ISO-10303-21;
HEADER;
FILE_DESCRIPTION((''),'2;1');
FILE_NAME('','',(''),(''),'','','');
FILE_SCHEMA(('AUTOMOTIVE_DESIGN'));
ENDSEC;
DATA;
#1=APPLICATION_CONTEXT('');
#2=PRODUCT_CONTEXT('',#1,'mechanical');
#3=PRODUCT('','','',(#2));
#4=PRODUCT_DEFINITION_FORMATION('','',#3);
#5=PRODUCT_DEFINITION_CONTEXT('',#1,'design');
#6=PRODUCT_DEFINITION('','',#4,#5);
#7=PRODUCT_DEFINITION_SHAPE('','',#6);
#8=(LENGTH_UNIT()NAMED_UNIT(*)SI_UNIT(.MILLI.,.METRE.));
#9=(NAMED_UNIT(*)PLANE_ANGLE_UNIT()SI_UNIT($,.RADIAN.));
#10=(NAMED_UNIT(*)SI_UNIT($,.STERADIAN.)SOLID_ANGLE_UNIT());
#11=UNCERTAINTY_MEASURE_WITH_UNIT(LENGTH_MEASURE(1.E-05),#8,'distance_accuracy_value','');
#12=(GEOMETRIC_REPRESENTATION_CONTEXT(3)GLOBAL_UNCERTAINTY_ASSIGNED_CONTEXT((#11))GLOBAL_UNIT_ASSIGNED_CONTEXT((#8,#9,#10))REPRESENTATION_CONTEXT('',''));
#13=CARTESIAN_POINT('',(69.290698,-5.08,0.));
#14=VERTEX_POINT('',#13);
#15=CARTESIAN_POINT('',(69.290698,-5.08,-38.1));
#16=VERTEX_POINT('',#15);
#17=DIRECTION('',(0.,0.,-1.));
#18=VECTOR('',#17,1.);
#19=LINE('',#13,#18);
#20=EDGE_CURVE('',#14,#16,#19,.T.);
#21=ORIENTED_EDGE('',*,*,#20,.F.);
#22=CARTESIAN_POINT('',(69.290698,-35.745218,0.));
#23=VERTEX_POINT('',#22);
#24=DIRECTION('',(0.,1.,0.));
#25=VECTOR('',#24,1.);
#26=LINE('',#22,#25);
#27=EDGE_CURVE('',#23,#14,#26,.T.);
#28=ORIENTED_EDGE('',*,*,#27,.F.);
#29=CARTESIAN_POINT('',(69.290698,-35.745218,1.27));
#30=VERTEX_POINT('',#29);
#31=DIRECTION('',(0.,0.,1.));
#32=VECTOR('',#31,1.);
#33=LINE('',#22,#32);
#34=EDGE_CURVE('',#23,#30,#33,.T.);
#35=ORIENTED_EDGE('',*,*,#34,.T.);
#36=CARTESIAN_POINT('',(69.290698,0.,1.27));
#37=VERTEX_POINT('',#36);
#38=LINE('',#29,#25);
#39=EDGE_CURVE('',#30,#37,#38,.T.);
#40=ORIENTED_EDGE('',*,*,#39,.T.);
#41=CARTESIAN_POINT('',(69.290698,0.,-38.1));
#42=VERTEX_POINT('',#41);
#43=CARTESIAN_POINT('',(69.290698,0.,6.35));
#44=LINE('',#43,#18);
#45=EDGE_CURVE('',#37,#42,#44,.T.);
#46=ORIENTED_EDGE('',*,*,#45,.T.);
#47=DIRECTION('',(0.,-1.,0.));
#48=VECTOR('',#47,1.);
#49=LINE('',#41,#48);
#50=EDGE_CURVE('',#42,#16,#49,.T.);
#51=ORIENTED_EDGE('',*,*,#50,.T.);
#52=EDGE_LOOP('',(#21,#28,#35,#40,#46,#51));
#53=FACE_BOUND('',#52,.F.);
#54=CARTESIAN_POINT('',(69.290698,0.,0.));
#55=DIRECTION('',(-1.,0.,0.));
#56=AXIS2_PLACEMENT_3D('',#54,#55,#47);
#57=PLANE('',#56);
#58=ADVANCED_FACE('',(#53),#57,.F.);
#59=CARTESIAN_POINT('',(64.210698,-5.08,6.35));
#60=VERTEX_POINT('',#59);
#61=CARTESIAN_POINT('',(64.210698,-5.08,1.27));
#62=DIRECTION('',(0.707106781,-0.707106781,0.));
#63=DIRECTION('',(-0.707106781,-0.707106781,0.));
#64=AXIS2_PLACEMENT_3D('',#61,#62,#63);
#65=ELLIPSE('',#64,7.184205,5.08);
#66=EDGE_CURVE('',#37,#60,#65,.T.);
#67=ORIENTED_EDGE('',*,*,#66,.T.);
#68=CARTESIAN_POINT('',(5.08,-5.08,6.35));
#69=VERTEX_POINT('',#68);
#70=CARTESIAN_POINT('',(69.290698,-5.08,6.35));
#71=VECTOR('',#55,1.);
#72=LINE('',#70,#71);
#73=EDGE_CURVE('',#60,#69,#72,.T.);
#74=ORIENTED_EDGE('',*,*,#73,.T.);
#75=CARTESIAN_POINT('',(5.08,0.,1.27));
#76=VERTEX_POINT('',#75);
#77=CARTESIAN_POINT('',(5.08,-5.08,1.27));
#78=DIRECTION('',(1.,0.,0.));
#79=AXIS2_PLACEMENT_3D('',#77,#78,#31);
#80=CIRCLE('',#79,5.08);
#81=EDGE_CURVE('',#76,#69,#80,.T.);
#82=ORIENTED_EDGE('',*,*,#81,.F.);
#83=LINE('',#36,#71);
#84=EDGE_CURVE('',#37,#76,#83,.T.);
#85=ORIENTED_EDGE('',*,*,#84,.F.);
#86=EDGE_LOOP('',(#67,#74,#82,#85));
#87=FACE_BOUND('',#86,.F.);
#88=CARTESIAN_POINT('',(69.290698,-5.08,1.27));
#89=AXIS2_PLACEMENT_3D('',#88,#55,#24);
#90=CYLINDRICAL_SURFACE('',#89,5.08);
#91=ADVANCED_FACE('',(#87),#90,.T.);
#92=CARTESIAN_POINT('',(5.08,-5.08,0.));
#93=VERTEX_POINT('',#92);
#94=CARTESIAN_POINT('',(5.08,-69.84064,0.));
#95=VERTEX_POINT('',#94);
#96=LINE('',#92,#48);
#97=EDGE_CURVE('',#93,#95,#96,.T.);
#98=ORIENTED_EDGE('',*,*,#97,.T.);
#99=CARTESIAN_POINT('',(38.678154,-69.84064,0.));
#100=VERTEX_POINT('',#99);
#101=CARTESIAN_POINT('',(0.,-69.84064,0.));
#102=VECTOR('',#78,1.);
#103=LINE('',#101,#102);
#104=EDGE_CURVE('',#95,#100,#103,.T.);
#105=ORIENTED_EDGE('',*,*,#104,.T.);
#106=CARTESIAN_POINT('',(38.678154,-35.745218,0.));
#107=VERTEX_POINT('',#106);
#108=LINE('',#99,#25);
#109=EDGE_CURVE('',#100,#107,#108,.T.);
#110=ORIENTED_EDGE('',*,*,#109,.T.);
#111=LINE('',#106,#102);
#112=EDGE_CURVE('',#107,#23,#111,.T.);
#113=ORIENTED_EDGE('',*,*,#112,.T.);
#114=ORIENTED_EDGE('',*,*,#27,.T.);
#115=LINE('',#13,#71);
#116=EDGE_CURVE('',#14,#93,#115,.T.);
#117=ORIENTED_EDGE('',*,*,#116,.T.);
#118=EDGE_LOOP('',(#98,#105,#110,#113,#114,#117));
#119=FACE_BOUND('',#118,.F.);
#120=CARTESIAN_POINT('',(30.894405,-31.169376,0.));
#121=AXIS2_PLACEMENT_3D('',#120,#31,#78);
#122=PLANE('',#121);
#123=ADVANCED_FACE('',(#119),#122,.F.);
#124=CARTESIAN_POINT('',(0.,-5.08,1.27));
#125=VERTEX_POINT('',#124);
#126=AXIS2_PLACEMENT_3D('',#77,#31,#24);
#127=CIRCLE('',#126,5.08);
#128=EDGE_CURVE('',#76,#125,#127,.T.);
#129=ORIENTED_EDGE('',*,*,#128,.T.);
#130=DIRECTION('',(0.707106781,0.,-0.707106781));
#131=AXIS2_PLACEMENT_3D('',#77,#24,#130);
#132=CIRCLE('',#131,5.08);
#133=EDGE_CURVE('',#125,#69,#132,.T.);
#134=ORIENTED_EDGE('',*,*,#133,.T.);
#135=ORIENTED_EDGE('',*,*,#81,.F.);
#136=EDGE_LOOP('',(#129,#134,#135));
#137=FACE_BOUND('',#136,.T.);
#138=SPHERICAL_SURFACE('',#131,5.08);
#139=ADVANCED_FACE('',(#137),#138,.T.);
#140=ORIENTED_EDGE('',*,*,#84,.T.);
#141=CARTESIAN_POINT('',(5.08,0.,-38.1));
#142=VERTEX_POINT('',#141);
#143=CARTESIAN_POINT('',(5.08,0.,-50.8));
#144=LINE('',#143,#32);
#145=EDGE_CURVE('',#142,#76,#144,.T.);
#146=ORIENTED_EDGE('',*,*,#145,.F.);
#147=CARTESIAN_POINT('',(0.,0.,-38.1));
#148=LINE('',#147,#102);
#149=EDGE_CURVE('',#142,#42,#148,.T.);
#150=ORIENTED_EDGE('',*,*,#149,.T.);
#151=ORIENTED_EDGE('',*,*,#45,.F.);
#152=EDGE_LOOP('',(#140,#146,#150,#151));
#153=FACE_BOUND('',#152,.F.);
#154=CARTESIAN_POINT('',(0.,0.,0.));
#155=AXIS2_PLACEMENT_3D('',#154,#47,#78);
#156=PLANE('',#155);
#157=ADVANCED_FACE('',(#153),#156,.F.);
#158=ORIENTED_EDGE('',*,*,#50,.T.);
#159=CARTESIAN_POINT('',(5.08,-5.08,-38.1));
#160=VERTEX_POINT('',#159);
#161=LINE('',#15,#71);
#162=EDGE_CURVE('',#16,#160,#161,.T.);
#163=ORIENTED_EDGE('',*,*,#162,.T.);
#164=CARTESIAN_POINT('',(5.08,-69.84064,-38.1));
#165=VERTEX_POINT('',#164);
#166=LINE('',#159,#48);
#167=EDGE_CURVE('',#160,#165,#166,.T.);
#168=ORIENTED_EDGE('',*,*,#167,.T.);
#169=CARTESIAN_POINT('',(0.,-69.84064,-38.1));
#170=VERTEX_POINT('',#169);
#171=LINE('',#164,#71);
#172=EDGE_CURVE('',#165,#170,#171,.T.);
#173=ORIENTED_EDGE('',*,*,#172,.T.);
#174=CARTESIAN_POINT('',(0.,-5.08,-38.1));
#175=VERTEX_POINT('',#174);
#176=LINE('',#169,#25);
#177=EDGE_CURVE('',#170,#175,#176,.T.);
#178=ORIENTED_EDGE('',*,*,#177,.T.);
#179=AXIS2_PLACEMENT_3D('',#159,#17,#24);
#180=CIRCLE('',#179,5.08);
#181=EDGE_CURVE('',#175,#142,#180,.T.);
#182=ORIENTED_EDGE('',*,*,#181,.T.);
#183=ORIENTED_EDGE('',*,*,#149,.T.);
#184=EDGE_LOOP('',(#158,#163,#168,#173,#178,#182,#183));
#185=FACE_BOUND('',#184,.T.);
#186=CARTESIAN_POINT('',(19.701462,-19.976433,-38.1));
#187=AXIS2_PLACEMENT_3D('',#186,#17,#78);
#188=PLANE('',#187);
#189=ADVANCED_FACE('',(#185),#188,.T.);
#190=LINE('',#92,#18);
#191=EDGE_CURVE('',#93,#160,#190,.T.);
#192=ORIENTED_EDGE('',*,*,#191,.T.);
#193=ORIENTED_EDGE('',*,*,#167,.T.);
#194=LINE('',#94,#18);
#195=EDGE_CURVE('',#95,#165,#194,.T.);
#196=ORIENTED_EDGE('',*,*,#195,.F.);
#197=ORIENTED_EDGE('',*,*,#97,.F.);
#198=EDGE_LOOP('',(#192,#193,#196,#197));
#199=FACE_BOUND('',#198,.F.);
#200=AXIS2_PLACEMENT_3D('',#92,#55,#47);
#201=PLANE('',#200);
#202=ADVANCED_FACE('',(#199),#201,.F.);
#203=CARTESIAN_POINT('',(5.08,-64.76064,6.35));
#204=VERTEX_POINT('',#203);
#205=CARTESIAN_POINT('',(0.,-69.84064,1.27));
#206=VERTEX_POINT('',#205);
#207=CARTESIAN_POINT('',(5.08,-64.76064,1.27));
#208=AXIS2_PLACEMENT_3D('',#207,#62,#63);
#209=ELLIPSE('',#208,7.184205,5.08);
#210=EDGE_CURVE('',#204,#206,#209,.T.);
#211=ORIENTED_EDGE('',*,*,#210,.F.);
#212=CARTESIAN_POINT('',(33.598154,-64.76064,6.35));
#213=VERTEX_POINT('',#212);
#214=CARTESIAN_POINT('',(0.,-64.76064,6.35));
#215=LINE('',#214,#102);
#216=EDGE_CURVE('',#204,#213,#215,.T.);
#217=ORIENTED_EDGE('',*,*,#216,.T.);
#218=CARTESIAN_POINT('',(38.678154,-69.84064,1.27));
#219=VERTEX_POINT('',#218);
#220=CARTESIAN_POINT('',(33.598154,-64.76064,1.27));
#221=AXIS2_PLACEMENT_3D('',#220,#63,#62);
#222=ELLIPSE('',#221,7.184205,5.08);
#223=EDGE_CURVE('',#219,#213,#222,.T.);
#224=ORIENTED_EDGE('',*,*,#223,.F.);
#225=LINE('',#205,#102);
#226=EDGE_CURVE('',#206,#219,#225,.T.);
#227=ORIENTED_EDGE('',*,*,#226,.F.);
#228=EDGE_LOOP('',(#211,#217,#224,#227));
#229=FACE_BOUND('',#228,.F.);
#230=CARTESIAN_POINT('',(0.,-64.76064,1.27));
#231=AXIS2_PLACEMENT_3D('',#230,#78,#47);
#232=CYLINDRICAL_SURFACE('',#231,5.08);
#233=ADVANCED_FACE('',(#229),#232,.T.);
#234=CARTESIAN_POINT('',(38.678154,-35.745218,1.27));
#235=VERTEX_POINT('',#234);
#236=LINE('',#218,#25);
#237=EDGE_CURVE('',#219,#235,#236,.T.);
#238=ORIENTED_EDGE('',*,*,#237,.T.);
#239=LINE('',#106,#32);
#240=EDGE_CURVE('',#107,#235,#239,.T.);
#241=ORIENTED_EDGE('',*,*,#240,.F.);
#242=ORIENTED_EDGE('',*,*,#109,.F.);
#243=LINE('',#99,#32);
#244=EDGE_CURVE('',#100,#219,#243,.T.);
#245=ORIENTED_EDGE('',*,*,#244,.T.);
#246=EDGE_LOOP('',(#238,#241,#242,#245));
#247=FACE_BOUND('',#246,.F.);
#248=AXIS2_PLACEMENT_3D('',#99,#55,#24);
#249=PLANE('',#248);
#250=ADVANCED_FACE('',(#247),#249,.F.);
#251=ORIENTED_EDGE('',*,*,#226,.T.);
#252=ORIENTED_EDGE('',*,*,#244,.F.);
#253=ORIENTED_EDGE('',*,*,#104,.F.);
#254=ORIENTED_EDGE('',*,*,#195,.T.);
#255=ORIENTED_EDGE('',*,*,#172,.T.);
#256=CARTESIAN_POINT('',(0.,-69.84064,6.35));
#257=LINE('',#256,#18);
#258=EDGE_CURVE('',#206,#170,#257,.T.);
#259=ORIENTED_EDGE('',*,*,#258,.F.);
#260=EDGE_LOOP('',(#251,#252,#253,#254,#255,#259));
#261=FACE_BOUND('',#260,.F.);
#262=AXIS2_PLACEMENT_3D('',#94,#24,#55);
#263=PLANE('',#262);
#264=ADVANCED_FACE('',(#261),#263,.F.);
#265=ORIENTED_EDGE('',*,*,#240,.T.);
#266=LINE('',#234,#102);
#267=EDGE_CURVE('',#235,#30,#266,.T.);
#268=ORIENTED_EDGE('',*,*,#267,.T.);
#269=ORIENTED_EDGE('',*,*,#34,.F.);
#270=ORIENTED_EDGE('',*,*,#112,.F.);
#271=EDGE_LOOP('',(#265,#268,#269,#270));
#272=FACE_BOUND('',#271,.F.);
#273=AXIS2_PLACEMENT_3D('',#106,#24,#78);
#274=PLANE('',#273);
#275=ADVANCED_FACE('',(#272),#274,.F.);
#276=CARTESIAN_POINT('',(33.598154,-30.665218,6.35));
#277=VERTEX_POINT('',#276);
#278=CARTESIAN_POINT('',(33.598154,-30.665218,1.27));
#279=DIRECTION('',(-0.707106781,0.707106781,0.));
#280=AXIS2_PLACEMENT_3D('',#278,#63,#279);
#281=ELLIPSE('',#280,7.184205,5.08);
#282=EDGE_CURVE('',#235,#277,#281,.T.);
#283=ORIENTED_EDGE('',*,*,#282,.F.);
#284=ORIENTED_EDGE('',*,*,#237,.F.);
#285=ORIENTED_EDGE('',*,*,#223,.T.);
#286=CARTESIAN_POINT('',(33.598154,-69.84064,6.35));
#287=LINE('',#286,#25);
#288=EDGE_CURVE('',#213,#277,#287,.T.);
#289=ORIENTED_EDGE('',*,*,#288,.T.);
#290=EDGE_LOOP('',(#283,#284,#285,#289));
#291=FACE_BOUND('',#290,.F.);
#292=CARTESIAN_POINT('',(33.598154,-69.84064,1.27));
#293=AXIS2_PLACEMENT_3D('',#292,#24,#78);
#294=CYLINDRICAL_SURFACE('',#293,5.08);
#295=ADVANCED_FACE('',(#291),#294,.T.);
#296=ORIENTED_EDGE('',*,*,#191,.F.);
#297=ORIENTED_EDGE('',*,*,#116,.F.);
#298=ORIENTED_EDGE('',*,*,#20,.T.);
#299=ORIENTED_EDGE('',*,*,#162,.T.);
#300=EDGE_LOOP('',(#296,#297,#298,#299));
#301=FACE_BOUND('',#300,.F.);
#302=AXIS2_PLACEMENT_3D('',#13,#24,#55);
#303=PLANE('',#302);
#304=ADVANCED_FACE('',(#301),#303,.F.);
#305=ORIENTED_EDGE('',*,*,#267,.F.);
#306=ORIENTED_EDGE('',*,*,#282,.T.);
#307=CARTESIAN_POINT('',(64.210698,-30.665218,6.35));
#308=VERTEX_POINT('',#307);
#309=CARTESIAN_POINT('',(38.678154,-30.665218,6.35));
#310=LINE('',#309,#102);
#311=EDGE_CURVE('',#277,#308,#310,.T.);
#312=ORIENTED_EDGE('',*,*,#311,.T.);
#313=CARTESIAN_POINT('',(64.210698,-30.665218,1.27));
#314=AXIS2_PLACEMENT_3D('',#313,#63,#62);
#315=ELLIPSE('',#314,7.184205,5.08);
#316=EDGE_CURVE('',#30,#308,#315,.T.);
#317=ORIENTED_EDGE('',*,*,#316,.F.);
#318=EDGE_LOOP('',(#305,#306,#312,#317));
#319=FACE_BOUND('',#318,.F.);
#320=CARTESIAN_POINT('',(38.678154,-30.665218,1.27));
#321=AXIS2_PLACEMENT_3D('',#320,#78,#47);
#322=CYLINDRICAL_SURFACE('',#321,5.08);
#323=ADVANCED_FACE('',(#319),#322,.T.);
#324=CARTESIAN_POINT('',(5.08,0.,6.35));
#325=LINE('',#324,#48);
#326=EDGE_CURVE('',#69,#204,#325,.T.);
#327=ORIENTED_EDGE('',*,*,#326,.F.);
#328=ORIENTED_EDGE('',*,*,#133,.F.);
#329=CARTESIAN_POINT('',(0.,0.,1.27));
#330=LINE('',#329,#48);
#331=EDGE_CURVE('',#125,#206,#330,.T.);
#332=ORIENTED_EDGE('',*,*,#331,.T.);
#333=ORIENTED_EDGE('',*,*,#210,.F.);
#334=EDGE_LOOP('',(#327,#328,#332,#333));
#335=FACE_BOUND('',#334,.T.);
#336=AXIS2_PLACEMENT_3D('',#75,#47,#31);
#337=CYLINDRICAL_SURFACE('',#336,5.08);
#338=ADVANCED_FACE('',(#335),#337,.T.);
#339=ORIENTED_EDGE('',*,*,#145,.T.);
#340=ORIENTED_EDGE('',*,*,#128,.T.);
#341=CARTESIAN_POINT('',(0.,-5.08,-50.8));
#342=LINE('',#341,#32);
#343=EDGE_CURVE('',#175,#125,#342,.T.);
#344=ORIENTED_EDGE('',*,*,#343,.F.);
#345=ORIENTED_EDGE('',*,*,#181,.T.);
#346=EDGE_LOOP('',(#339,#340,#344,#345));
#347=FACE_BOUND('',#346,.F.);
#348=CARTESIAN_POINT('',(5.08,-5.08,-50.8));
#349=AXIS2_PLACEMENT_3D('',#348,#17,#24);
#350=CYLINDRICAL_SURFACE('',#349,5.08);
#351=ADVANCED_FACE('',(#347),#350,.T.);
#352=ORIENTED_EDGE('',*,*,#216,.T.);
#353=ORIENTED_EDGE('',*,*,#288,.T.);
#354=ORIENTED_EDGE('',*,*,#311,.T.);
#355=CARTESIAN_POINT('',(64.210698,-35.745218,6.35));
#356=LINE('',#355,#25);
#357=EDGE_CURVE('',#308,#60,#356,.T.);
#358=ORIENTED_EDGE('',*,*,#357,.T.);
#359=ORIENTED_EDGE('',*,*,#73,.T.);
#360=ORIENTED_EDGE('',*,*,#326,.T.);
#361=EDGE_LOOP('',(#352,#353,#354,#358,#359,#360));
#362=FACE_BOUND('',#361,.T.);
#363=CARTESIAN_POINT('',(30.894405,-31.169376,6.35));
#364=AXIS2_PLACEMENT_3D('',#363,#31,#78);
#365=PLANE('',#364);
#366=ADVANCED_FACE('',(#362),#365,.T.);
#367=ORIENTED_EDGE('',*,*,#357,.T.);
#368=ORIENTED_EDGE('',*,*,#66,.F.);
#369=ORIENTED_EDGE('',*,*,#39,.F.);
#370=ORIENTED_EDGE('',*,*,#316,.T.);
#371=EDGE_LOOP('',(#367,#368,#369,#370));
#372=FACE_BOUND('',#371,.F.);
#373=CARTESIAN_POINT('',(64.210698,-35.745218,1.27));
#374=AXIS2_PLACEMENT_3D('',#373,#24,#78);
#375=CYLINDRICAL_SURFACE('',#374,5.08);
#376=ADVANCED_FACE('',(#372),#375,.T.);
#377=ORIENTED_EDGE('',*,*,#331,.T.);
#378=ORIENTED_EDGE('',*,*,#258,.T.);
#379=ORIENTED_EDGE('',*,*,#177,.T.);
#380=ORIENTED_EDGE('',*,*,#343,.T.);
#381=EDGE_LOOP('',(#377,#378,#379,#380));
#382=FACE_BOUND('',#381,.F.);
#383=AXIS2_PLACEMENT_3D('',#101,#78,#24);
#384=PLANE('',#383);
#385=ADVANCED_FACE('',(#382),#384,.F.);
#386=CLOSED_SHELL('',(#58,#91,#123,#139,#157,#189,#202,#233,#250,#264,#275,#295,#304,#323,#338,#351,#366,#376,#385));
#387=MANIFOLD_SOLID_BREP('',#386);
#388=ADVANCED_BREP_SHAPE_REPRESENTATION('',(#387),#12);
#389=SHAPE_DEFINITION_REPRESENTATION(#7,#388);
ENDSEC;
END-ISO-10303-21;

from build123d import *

# Parameters (mm, degrees)
F1_DEPTH    = 6.35
F3_DEPTH    = 38.1
F4_R        = 5.08
F5_T1_DEPTH = 52.07
F5_S5_W     = 5.08
F5_S5_H     = 5.08
F5_T6_DEPTH = 5.08


# Not quite as in the source:
# - a fillet or chamfer that OpenCascade refuses, or shapes differently, is made with other operations: its cross-section is extruded or revolved along the edge and cut away or added


with BuildPart() as f1:
    # F0 (on Top) → F1 (new body)
    with BuildSketch(Plane.XY):
        Polygon((69.2906975746, 0), (0, 0), (0, -69.8406398296), (38.6781543493, -69.8406398296), (38.6781543493, -35.7452183962), (69.2906975746, -35.7452183962), align=None)
    extrude(amount=F1_DEPTH)

    # F2 (on face) → F3 (join)
    with BuildSketch(Plane(origin=(0, 0, 0), x_dir=(1, 0, 0), z_dir=(0, 0, -1))):
        Polygon((5.08, 69.8406398296), (0, 69.8406398296), (0, 0), (69.2906975746, 0), (69.2906975746, 5.08), (5.08, 5.08), align=None)
    extrude(amount=F3_DEPTH)

    # F4
    f4_edges = [f1.edges().sort_by_distance(p)[0] for p in [
        (34.645349, 0, 6.35),
        (0, -34.92032, 6.35),
        (19.339077, -69.84064, 6.35),
        (38.678154, -52.792929, 6.35),
        (53.984426, -35.745218, 6.35),
        (69.290698, -17.872609, 6.35),
    ]]
    fillet(f4_edges, radius=F4_R)

    # F5: fillet of radius 5.08 on 1 edges, made by hand

    # F5_s2 → F5_t1 (cut)
    with BuildSketch(Plane.XY.offset(-50.8)):
        with BuildLine():
            ThreePointArc((5.08, 0), (1.4878975516, -1.4878975516), (0, -5.08))
            Line((0, -5.08), (0, 0))
            Line((0, 0), (5.08, 0))
        make_face()
    extrude(amount=F5_T1_DEPTH, mode=Mode.SUBTRACT)


with BuildPart() as f5_tool4:
    # F5_s5 → F5_t6 (new body)
    with BuildSketch(Plane.XZ.offset(5.08)):
        with Locations((2.54, 3.81)):
            Rectangle(F5_S5_W, F5_S5_H)
    extrude(amount=-F5_T6_DEPTH)

    # F5_s7 → F5_t8 (revolve, cut)
    with BuildSketch(Plane(origin=(5.08, -5.08, 1.27), x_dir=(0.7071067812, 0, -0.7071067812), z_dir=(0.7071067812, 0, 0.7071067812))):
        with BuildLine():
            ThreePointArc((0, -5.08), (5.08, 0), (0, 5.08))
            Line((0, 5.08), (0, -5.08))
        make_face()
    revolve(axis=Axis((5.08, -5.08, 1.27), (0, 1, 0)), mode=Mode.SUBTRACT)


with BuildPart() as f1_1:
    add(f1.part)

    # F5_t3: cut F5_tool4
    add(f5_tool4.part, mode=Mode.SUBTRACT)


solid = f1_1.part
